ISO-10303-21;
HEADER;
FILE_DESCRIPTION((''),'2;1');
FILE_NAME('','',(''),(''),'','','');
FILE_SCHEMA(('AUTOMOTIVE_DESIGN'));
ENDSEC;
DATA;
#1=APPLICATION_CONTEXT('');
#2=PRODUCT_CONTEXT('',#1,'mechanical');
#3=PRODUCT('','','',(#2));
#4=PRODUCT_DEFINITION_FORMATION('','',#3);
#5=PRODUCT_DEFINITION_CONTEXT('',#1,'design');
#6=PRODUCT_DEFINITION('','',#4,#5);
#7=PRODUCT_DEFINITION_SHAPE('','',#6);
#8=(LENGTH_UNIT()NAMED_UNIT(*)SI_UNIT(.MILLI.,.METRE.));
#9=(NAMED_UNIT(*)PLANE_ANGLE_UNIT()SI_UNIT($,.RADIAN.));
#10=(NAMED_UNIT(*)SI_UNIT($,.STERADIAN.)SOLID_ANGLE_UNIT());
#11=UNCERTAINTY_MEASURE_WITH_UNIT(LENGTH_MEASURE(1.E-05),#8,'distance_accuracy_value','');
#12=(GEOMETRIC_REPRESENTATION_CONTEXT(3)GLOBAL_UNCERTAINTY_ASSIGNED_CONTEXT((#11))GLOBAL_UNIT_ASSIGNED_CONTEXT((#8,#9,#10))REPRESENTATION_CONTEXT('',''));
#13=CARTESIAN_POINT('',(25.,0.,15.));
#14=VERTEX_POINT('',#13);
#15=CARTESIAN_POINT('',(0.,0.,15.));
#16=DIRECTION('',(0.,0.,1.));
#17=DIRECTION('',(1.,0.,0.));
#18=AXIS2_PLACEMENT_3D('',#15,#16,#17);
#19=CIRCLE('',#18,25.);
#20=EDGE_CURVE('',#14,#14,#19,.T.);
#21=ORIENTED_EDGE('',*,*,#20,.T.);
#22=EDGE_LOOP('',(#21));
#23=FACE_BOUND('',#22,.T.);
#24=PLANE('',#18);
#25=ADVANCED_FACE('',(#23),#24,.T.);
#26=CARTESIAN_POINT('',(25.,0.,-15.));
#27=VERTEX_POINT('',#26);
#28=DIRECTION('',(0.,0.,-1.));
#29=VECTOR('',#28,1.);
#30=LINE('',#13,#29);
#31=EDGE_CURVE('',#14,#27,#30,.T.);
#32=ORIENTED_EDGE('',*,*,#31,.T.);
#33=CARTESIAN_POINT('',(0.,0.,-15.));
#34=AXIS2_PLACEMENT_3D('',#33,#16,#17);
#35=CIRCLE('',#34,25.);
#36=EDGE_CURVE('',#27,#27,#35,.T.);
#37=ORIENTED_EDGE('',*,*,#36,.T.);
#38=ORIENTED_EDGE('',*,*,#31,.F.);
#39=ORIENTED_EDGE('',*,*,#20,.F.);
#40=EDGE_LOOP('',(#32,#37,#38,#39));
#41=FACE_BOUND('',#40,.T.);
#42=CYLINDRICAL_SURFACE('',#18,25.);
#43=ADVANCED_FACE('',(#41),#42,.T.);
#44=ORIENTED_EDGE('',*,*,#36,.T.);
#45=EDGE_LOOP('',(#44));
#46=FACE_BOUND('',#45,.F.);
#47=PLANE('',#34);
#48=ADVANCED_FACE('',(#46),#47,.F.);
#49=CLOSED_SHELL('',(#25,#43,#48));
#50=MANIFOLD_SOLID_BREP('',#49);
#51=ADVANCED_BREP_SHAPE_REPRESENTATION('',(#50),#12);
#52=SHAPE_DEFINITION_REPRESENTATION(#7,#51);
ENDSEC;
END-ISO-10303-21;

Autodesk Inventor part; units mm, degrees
ref_plane "YZ Plane" through (0, 0, 0) normal (1, 0, 0) x (0, 1, 0)
ref_plane "XZ Plane" through (0, 0, 0) normal (0, 1, 0) x (-1, 0, 0)
ref_plane "XY Plane" through (0, 0, 0) normal (0, 0, 1) x (1, 0, 0)
surface "Composite1"
sketch "Sketch1" plane through (0, 0, 15) normal (0, 0, 1) x (1, 0, 0)
  circle A0 centre (0, 0) radius 25
extrude "Extrusion1" add sketch "Sketch1" against normal up to surface (30 mm away)
properties part number "gear1"
